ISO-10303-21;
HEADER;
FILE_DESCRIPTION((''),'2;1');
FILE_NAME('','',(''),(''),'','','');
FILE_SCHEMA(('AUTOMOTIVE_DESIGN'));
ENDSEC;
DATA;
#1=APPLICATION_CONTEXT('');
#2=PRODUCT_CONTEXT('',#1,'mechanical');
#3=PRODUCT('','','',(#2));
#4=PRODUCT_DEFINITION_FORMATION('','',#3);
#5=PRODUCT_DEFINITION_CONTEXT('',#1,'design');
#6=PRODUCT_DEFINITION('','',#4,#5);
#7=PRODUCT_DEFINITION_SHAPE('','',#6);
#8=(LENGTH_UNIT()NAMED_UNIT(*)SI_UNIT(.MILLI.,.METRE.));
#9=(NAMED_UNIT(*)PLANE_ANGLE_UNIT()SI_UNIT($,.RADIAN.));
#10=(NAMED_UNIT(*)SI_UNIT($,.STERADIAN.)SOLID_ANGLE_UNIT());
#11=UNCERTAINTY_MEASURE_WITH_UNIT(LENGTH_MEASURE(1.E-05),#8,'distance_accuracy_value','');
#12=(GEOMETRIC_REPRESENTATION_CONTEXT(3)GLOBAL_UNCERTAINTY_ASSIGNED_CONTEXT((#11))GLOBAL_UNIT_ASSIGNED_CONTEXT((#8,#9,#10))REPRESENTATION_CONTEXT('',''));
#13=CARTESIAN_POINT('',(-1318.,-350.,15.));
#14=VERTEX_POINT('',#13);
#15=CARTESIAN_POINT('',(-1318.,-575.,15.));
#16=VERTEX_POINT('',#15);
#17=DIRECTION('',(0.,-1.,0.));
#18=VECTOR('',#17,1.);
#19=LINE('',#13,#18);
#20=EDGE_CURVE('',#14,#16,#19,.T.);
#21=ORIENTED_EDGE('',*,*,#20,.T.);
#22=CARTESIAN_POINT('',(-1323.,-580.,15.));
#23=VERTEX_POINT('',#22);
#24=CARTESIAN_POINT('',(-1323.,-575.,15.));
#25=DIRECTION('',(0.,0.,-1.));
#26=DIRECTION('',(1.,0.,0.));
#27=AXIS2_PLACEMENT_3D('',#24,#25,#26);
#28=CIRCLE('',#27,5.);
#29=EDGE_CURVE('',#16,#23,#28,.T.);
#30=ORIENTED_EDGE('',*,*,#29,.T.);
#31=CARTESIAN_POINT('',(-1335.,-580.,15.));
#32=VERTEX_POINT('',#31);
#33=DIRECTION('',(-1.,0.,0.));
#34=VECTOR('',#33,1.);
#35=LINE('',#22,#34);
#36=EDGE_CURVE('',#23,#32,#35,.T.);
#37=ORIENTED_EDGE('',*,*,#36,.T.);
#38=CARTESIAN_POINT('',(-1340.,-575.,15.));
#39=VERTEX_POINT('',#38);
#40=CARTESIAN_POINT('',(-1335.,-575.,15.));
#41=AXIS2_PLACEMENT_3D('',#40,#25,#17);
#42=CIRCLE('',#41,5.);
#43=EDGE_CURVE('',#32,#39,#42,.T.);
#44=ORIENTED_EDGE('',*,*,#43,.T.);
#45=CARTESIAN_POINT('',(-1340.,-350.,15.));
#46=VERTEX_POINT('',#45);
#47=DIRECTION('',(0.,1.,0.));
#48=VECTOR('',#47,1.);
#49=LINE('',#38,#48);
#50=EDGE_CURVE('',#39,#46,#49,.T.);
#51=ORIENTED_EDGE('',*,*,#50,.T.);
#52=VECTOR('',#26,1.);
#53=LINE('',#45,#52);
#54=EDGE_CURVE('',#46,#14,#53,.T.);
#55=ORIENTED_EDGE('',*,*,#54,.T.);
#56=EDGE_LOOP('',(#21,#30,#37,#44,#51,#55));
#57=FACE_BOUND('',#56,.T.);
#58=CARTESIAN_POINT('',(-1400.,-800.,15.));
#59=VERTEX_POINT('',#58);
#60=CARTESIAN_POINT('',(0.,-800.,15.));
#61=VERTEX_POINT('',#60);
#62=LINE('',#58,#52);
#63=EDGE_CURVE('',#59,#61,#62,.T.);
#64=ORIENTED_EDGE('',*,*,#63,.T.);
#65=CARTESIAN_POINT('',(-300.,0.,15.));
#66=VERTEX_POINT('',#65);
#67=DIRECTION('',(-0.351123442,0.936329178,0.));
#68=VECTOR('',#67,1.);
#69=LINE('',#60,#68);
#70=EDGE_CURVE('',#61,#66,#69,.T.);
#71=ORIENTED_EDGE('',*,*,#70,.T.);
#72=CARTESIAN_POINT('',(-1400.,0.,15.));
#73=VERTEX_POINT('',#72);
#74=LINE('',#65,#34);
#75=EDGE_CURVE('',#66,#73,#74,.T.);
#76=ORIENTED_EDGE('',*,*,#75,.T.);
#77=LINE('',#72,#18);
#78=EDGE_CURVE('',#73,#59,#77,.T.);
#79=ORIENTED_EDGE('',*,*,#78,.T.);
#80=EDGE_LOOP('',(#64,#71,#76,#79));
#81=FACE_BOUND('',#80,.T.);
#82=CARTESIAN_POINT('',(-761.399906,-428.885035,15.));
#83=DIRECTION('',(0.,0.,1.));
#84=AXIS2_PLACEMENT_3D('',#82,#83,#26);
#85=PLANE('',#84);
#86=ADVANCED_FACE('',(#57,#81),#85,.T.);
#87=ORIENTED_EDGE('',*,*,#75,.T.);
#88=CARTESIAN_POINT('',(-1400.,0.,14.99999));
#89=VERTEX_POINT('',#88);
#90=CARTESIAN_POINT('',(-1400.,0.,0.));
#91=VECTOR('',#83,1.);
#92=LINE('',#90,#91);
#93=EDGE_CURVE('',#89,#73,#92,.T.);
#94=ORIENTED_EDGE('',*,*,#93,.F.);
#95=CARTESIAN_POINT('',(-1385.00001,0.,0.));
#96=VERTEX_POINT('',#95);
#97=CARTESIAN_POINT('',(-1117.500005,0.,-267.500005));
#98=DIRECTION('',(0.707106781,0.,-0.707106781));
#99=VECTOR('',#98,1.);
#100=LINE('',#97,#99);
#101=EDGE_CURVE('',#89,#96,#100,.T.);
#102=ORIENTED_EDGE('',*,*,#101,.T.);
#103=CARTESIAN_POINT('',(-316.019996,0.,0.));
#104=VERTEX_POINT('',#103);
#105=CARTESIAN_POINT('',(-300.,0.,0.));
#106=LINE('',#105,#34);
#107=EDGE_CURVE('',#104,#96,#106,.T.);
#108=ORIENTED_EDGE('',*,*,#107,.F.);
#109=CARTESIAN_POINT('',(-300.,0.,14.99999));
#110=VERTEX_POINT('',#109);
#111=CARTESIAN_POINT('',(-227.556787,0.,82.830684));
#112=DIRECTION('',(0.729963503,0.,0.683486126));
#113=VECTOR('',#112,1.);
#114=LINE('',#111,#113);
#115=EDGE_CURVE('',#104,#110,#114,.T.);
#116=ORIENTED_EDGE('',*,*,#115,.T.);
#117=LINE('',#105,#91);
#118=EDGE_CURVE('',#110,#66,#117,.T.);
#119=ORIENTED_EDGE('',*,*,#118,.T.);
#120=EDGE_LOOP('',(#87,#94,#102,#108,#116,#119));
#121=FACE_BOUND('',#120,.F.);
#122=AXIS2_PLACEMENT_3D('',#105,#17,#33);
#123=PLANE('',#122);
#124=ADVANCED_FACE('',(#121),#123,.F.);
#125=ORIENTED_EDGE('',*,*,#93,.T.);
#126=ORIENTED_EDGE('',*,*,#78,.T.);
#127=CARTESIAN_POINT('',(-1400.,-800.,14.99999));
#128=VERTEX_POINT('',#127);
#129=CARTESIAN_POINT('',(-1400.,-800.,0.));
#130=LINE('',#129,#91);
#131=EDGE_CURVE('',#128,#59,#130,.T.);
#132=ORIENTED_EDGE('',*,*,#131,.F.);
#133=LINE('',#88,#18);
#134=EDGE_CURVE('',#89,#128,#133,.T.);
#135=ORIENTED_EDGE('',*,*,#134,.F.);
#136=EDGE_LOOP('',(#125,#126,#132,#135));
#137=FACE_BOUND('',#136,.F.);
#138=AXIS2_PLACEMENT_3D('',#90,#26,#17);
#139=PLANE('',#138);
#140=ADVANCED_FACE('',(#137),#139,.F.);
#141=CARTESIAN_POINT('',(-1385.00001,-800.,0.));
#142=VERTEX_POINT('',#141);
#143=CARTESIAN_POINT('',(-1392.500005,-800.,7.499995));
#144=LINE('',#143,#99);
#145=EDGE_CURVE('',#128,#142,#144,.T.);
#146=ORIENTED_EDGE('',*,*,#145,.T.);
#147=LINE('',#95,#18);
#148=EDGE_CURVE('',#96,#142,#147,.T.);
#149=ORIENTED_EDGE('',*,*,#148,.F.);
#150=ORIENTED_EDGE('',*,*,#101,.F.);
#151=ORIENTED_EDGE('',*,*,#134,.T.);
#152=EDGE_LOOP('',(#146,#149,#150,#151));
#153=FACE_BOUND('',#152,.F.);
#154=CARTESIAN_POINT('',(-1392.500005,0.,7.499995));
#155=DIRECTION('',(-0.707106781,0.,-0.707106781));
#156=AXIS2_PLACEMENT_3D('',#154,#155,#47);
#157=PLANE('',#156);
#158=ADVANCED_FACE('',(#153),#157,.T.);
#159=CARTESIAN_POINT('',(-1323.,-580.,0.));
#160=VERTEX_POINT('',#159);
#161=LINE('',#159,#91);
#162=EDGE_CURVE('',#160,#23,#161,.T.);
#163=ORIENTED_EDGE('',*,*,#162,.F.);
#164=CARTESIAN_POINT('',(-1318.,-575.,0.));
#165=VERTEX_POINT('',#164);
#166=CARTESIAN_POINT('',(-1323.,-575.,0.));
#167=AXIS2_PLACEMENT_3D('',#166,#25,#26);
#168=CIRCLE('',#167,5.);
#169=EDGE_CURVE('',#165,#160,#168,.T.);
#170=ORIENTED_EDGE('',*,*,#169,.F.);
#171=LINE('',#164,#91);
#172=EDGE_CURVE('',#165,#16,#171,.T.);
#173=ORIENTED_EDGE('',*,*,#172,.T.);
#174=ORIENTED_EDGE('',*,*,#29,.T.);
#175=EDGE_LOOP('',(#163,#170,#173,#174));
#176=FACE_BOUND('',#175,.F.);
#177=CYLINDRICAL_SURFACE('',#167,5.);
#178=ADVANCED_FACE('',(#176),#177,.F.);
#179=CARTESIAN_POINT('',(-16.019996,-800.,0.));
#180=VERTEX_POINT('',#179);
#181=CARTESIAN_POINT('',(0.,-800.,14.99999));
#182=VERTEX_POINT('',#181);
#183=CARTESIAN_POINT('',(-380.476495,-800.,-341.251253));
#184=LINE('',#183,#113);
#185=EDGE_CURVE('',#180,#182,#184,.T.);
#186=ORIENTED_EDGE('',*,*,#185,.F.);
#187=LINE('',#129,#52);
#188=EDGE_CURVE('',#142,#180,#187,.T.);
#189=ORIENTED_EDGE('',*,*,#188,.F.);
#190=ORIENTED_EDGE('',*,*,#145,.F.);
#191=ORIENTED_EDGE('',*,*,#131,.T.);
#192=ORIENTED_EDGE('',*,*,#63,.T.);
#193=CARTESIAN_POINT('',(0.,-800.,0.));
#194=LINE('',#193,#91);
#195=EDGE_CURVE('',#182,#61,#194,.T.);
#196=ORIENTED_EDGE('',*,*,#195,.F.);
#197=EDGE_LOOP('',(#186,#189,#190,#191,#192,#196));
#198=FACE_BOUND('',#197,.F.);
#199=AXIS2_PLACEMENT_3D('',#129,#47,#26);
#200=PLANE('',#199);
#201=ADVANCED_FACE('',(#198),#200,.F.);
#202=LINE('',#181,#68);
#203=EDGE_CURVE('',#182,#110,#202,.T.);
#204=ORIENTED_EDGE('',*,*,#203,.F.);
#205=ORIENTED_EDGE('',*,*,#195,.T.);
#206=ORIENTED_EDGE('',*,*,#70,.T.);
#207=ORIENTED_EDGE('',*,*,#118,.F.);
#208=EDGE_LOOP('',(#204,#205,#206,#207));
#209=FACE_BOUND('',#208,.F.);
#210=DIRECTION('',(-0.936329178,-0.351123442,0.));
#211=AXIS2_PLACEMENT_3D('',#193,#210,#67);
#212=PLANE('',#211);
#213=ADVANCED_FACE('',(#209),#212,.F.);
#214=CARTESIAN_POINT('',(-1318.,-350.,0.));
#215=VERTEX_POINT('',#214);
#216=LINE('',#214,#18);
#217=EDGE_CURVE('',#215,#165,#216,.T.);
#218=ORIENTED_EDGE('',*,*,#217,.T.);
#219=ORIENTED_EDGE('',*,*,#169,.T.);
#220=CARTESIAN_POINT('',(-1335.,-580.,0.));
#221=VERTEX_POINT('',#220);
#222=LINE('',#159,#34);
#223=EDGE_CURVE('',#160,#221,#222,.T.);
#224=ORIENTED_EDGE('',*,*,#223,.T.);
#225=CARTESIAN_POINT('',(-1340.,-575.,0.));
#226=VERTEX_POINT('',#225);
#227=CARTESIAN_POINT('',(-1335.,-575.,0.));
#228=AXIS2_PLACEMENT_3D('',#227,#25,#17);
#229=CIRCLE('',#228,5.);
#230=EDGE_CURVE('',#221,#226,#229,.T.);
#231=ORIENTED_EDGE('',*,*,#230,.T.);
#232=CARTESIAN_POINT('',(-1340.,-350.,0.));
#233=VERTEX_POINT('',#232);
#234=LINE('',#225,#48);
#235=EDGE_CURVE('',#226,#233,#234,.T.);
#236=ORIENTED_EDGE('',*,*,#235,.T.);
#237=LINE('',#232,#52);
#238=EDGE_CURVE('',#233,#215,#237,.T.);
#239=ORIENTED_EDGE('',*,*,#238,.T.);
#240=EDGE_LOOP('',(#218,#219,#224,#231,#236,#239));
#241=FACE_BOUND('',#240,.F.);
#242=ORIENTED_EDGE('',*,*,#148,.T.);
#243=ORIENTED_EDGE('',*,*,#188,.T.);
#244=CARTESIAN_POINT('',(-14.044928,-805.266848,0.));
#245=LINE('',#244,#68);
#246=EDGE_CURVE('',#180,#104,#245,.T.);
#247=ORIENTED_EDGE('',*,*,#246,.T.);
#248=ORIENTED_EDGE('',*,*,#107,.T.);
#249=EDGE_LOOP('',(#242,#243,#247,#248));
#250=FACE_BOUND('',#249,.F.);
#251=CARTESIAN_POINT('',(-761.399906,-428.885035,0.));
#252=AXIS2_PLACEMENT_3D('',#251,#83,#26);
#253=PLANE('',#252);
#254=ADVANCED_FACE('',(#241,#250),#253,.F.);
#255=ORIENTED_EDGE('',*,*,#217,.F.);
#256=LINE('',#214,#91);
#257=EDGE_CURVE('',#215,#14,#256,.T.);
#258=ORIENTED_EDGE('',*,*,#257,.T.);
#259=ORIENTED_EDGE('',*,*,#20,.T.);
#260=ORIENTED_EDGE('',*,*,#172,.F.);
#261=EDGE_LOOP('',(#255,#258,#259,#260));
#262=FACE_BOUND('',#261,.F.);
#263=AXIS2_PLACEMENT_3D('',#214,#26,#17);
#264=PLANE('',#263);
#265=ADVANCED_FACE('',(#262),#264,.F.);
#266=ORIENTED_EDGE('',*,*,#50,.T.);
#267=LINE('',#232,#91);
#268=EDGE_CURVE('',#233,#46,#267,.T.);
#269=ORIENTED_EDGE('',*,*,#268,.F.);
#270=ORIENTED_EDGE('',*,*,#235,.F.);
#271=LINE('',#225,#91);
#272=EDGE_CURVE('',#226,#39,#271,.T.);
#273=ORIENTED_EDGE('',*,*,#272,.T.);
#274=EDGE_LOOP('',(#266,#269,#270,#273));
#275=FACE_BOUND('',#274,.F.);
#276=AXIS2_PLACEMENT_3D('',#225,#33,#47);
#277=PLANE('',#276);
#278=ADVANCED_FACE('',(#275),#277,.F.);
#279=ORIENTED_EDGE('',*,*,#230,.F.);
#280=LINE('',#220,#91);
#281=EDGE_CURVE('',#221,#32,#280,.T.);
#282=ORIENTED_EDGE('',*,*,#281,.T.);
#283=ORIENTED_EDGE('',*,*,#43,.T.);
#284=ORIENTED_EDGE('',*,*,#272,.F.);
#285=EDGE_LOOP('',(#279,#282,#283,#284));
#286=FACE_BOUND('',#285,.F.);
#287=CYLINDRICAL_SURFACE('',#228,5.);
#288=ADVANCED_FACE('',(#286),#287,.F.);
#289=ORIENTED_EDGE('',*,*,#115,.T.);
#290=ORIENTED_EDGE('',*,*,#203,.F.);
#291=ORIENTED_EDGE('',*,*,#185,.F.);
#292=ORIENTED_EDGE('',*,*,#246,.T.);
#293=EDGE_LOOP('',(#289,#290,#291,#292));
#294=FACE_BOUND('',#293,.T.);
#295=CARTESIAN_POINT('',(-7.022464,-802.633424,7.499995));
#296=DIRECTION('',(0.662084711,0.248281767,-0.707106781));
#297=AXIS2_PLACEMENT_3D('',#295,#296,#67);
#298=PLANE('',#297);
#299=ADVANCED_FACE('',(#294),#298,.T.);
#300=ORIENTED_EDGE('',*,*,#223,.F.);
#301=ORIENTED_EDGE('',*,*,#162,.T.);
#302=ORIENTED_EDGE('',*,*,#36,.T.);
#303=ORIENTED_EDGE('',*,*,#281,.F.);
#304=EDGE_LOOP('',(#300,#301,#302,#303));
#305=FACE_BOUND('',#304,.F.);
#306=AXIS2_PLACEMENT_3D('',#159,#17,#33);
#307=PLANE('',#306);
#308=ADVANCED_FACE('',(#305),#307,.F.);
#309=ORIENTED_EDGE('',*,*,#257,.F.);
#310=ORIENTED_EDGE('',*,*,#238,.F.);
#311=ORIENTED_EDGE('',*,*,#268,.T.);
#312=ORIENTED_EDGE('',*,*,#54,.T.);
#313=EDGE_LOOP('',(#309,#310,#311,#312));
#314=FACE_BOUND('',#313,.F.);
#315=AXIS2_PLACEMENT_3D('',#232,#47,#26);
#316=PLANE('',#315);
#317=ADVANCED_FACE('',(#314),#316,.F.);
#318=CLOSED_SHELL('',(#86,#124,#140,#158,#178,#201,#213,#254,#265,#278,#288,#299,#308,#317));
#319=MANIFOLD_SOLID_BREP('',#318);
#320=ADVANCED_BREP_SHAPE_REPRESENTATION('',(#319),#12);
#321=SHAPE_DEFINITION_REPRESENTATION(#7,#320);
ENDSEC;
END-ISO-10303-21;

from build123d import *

# Parameters (mm, degrees)
F1_DEPTH = 15
F2_SIZE  = 14.99999
F3_SIZE  = 14.99999


# Not quite as in the source:
# - a fillet or chamfer is up to 0.001 mm smaller than in the source, because OpenCascade refuses the exact size


with BuildPart() as f1:
    # F0 (on Top) → F1 (new body)
    with BuildSketch(Plane.XY):
        Polygon((0, -800), (-300, 0), (-1400, 0), (-1400, -800), align=None)
        with BuildLine():
            Line((-1340, -575), (-1340, -350))
            Line((-1340, -350), (-1318, -350))
            Line((-1318, -350), (-1318, -575))
            ThreePointArc((-1318, -575), (-1319.4644660941, -578.5355339059), (-1323, -580))
            Line((-1323, -580), (-1335, -580))
            ThreePointArc((-1335, -580), (-1338.5355339059, -578.5355339059), (-1340, -575))
        make_face(mode=Mode.SUBTRACT)
    extrude(amount=F1_DEPTH)

    # F2 (size 15 in the source; OpenCascade refuses exactly that, so slightly less here)
    f2_edges = [f1.edges().sort_by_distance(p)[0] for p in [
        (-1400, -400, 0),
    ]]
    chamfer(f2_edges, length=F2_SIZE)

    # F3 (size 15 in the source; OpenCascade refuses exactly that, so slightly less here)
    f3_edges = [f1.edges().sort_by_distance(p)[0] for p in [
        (-150, -400, 0),
    ]]
    chamfer(f3_edges, length=F3_SIZE)


solid = f1.part
